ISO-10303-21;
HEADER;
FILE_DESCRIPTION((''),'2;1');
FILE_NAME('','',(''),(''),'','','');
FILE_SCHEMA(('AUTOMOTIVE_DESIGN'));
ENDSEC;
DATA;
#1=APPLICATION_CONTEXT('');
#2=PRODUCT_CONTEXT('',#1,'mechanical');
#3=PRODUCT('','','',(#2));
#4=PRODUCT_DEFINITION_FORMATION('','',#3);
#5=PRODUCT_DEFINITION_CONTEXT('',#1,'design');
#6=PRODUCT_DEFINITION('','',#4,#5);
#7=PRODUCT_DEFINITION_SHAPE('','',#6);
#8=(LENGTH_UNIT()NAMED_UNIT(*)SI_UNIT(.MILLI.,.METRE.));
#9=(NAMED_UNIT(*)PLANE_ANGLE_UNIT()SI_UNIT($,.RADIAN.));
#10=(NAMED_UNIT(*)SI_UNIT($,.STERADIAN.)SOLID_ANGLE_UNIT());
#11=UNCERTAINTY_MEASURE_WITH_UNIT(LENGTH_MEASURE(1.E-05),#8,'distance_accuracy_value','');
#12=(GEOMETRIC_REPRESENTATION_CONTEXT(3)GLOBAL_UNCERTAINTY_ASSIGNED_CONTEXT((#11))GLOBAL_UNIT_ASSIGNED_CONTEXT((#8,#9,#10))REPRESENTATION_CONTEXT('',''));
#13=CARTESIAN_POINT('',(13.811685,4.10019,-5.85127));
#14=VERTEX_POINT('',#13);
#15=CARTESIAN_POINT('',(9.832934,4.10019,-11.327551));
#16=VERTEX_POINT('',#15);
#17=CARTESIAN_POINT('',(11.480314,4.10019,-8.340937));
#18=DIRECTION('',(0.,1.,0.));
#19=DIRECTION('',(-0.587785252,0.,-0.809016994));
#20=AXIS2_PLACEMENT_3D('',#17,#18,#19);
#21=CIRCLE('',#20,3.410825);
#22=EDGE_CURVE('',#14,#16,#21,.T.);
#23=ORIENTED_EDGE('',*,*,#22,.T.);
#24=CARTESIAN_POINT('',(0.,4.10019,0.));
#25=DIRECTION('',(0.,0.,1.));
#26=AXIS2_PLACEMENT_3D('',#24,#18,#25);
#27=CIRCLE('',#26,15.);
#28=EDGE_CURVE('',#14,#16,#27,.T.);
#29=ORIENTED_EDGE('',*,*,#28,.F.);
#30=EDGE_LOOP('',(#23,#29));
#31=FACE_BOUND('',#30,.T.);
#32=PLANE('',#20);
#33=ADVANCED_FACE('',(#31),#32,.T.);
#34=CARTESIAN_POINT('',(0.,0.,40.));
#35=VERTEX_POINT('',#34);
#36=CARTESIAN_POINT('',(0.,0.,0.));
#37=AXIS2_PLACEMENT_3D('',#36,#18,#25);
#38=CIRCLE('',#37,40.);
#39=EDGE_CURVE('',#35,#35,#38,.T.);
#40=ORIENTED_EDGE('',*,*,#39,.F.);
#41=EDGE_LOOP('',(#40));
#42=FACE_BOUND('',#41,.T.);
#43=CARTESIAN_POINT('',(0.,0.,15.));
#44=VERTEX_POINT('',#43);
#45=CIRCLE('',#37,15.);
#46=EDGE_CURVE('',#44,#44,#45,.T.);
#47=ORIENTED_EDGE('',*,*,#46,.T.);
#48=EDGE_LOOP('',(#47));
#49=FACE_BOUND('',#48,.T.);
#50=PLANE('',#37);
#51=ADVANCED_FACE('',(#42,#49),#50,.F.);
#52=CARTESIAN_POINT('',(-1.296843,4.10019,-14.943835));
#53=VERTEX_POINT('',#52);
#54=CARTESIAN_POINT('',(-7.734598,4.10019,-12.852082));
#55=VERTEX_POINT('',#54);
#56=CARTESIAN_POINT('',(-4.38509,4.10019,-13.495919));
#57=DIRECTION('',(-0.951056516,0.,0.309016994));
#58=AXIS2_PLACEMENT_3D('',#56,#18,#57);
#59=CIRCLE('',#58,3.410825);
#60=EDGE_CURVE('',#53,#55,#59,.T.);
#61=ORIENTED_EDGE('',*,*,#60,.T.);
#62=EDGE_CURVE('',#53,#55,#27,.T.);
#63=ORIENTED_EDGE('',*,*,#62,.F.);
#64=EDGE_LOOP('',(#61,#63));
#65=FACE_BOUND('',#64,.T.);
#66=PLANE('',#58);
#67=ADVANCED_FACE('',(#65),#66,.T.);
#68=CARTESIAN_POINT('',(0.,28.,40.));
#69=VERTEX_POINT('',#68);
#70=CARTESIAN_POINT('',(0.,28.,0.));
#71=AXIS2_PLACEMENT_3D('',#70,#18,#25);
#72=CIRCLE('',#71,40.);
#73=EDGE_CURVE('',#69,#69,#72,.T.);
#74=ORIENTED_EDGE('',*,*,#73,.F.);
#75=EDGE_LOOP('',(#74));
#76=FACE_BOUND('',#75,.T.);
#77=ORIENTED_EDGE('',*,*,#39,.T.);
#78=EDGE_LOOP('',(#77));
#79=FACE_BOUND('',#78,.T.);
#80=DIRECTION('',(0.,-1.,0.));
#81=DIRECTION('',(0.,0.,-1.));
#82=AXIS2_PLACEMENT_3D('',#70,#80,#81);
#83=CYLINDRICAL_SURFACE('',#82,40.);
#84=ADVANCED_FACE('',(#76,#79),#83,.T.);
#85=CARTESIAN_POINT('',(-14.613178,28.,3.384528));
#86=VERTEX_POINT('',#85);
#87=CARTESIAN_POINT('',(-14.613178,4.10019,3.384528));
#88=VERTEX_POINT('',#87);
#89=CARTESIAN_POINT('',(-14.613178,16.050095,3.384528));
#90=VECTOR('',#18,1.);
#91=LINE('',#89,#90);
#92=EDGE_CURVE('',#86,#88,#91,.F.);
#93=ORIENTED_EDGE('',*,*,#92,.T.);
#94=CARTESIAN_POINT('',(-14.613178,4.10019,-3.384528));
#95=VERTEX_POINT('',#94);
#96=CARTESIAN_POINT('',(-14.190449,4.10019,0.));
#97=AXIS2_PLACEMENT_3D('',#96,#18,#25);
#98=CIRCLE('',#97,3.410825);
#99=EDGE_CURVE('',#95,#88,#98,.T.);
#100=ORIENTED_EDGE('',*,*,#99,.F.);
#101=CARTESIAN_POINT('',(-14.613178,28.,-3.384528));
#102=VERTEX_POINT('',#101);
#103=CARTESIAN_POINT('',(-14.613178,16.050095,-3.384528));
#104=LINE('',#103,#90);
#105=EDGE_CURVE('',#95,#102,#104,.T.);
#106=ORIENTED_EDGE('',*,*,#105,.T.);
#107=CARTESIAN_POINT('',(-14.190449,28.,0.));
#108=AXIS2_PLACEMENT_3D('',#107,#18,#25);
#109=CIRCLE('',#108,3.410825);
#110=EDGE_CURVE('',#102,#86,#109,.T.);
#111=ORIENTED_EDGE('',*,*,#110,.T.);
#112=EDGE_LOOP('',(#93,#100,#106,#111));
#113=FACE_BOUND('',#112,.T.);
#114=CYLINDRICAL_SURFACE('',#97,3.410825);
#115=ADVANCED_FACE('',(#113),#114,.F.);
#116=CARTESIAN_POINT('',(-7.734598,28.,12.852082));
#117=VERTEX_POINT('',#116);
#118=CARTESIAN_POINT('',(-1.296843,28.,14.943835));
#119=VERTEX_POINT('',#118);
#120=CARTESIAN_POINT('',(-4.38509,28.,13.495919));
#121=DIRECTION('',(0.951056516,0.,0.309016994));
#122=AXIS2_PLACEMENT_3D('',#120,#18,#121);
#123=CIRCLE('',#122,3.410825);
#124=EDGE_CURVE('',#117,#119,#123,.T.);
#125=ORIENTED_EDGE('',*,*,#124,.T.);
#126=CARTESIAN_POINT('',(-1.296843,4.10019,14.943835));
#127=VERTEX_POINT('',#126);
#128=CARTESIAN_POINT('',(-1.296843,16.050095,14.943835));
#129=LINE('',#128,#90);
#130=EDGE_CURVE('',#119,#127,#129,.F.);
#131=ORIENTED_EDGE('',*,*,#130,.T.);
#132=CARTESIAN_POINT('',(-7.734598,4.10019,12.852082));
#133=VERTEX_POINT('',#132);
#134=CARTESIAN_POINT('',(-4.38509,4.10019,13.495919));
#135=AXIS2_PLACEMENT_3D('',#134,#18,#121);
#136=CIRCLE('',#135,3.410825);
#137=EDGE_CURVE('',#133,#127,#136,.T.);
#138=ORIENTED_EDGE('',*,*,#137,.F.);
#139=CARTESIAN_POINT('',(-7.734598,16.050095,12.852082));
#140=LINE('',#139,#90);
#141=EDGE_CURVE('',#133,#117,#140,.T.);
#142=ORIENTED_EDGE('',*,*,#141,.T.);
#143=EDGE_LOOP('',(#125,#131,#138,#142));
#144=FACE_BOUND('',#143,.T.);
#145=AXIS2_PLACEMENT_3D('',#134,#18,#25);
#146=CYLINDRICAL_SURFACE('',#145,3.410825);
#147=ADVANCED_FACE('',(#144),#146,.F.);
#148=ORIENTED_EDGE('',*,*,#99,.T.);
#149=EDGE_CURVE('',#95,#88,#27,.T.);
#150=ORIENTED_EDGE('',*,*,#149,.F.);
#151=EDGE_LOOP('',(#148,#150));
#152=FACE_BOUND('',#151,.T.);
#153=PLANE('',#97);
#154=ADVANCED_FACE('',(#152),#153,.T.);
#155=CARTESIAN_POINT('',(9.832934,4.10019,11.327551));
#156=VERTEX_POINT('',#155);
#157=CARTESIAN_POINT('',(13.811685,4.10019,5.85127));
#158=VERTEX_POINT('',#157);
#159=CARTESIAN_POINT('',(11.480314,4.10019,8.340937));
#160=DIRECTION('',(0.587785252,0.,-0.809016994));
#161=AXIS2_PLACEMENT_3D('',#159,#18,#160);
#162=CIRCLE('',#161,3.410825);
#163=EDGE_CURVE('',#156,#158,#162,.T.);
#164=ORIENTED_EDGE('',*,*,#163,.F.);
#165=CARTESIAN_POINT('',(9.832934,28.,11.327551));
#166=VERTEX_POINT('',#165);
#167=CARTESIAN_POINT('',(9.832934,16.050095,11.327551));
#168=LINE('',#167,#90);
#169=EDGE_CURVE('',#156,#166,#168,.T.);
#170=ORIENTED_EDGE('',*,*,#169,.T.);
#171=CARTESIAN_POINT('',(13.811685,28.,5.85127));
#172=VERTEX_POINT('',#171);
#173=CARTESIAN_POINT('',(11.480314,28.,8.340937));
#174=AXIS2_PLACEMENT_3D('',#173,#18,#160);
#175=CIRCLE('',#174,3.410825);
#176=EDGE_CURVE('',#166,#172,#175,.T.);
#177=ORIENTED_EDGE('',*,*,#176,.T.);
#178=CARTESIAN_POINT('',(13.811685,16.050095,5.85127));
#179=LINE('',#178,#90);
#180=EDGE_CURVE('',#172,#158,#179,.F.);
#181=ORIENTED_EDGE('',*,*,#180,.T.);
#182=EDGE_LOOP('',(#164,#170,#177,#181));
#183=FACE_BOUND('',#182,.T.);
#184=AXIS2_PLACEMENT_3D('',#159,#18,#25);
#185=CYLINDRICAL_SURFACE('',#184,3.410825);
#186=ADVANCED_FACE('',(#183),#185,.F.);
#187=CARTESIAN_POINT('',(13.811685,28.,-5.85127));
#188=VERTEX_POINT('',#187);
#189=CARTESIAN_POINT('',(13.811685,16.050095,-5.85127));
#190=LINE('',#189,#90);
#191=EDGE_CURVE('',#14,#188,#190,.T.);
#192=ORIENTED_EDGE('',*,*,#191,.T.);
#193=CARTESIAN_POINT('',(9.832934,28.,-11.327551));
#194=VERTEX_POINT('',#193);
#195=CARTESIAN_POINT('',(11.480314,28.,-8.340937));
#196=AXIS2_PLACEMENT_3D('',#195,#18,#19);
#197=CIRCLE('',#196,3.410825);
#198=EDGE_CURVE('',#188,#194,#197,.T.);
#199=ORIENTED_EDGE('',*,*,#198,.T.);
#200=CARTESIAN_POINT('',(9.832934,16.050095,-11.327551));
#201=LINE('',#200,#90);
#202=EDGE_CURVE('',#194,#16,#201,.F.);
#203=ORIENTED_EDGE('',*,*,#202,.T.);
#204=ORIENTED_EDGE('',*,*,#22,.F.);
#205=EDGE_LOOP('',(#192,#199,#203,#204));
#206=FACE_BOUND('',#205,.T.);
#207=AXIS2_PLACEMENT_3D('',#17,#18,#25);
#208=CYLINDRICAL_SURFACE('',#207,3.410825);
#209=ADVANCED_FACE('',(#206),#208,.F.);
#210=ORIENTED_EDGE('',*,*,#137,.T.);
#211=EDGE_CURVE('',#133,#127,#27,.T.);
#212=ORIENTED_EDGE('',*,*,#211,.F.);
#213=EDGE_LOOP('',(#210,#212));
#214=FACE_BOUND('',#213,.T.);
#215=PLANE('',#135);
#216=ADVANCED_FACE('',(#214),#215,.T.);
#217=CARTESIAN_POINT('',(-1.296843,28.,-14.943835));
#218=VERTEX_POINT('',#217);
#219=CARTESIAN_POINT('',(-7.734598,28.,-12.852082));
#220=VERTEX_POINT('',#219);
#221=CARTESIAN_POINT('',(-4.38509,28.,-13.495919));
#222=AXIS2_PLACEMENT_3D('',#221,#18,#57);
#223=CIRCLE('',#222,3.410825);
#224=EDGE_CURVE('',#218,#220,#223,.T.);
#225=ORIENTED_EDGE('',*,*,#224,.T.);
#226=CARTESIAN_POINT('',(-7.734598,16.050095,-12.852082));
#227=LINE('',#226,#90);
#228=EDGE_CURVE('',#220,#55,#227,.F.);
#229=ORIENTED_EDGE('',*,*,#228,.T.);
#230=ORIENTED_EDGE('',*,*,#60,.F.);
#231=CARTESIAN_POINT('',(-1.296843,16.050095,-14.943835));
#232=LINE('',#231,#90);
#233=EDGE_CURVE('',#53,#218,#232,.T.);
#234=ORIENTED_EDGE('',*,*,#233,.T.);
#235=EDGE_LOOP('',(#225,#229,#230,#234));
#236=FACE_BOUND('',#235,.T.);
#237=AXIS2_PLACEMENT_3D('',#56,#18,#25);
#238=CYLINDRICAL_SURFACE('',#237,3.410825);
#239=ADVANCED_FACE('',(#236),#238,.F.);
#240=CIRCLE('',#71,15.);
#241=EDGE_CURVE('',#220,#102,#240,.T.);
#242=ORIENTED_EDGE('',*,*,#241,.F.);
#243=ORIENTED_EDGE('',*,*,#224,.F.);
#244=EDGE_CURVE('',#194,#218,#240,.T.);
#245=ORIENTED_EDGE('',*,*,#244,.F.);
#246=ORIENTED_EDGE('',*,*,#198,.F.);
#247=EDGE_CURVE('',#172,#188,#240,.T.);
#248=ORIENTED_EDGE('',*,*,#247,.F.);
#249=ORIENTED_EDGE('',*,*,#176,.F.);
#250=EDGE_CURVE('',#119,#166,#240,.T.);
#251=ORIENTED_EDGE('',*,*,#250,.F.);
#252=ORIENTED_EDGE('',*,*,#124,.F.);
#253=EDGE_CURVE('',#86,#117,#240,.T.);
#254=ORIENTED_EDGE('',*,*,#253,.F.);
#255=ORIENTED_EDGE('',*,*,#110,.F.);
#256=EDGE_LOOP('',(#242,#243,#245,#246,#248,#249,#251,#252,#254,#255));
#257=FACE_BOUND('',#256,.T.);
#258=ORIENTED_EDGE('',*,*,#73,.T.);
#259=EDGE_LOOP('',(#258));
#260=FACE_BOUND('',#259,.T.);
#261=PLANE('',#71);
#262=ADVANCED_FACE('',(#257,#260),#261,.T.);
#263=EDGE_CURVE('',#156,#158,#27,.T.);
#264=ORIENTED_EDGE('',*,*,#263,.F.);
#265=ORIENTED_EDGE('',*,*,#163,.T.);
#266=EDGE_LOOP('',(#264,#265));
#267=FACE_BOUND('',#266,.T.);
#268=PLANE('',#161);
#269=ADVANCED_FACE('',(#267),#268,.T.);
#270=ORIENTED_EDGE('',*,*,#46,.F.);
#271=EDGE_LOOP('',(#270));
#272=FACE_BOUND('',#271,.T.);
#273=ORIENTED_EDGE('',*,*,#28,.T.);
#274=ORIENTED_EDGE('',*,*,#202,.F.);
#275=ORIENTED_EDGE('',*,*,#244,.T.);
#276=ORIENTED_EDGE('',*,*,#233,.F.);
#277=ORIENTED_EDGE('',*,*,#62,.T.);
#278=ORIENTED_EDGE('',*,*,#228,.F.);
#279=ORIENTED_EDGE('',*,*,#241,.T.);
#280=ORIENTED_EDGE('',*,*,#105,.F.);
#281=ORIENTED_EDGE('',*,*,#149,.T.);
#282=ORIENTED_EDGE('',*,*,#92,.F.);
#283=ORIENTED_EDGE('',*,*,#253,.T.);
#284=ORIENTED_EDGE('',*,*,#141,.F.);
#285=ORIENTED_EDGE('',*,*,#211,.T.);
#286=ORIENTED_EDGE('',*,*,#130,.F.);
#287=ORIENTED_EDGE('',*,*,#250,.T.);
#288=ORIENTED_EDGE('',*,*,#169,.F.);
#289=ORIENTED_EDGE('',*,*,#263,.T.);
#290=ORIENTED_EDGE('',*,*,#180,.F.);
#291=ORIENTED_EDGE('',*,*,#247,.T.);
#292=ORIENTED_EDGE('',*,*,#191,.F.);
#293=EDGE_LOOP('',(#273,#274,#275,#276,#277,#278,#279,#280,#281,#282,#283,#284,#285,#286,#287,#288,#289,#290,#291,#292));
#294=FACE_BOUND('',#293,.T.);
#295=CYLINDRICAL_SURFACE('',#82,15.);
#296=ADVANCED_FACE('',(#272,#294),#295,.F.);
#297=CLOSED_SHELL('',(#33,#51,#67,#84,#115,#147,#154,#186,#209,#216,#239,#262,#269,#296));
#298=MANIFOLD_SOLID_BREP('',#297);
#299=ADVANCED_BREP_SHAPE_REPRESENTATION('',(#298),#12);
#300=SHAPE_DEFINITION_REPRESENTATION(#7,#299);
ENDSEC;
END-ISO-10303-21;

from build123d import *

# Parameters (mm, degrees)
SKETCH1_R           = 40
BOSS_EXTRUDE1_DEPTH = 28
SKETCH2_R           = 15
CUT_EXTRUDE1_DEPTH  = 64.118935352
SKETCH3_R           = 3.410825195
CUT_EXTRUDE2_DEPTH  = 23.899809634
CIRPATTERN1_COUNT   = 5


with BuildPart() as part:
    # Sketch1 → Boss-Extrude1 (new body)
    with BuildSketch(Plane(origin=(0, 0, 0), x_dir=(1, 0, 0), z_dir=(0, 1, 0))):
        Circle(SKETCH1_R)
    extrude(amount=BOSS_EXTRUDE1_DEPTH)

    # Sketch2 → Cut-Extrude1 (cut, through all)
    with BuildSketch(Plane(origin=(0, 0, 0), x_dir=(1, 0, 0), z_dir=(0, 1, 0))):
        Circle(SKETCH2_R)
    extrude(amount=CUT_EXTRUDE1_DEPTH, mode=Mode.SUBTRACT)

    # Sketch3 → Cut-Extrude2 (cut)
    with BuildSketch(Plane(origin=(0, 28, 0), x_dir=(1, 0, 0), z_dir=(0, 1, 0))):
        with Locations((-14.190448984, 0)):
            Circle(SKETCH3_R)
    cut_extrude2 = extrude(amount=-CUT_EXTRUDE2_DEPTH, mode=Mode.SUBTRACT)

    # CirPattern1: Cut-Extrude2 ×5 about axis
    cirpattern1_axis = Axis((0, 0, 0), (0, 1, 0))
    for i in range(1, CIRPATTERN1_COUNT):
        add(cut_extrude2.rotate(cirpattern1_axis, i * 360 / CIRPATTERN1_COUNT), mode=Mode.SUBTRACT)


solid = part.part
